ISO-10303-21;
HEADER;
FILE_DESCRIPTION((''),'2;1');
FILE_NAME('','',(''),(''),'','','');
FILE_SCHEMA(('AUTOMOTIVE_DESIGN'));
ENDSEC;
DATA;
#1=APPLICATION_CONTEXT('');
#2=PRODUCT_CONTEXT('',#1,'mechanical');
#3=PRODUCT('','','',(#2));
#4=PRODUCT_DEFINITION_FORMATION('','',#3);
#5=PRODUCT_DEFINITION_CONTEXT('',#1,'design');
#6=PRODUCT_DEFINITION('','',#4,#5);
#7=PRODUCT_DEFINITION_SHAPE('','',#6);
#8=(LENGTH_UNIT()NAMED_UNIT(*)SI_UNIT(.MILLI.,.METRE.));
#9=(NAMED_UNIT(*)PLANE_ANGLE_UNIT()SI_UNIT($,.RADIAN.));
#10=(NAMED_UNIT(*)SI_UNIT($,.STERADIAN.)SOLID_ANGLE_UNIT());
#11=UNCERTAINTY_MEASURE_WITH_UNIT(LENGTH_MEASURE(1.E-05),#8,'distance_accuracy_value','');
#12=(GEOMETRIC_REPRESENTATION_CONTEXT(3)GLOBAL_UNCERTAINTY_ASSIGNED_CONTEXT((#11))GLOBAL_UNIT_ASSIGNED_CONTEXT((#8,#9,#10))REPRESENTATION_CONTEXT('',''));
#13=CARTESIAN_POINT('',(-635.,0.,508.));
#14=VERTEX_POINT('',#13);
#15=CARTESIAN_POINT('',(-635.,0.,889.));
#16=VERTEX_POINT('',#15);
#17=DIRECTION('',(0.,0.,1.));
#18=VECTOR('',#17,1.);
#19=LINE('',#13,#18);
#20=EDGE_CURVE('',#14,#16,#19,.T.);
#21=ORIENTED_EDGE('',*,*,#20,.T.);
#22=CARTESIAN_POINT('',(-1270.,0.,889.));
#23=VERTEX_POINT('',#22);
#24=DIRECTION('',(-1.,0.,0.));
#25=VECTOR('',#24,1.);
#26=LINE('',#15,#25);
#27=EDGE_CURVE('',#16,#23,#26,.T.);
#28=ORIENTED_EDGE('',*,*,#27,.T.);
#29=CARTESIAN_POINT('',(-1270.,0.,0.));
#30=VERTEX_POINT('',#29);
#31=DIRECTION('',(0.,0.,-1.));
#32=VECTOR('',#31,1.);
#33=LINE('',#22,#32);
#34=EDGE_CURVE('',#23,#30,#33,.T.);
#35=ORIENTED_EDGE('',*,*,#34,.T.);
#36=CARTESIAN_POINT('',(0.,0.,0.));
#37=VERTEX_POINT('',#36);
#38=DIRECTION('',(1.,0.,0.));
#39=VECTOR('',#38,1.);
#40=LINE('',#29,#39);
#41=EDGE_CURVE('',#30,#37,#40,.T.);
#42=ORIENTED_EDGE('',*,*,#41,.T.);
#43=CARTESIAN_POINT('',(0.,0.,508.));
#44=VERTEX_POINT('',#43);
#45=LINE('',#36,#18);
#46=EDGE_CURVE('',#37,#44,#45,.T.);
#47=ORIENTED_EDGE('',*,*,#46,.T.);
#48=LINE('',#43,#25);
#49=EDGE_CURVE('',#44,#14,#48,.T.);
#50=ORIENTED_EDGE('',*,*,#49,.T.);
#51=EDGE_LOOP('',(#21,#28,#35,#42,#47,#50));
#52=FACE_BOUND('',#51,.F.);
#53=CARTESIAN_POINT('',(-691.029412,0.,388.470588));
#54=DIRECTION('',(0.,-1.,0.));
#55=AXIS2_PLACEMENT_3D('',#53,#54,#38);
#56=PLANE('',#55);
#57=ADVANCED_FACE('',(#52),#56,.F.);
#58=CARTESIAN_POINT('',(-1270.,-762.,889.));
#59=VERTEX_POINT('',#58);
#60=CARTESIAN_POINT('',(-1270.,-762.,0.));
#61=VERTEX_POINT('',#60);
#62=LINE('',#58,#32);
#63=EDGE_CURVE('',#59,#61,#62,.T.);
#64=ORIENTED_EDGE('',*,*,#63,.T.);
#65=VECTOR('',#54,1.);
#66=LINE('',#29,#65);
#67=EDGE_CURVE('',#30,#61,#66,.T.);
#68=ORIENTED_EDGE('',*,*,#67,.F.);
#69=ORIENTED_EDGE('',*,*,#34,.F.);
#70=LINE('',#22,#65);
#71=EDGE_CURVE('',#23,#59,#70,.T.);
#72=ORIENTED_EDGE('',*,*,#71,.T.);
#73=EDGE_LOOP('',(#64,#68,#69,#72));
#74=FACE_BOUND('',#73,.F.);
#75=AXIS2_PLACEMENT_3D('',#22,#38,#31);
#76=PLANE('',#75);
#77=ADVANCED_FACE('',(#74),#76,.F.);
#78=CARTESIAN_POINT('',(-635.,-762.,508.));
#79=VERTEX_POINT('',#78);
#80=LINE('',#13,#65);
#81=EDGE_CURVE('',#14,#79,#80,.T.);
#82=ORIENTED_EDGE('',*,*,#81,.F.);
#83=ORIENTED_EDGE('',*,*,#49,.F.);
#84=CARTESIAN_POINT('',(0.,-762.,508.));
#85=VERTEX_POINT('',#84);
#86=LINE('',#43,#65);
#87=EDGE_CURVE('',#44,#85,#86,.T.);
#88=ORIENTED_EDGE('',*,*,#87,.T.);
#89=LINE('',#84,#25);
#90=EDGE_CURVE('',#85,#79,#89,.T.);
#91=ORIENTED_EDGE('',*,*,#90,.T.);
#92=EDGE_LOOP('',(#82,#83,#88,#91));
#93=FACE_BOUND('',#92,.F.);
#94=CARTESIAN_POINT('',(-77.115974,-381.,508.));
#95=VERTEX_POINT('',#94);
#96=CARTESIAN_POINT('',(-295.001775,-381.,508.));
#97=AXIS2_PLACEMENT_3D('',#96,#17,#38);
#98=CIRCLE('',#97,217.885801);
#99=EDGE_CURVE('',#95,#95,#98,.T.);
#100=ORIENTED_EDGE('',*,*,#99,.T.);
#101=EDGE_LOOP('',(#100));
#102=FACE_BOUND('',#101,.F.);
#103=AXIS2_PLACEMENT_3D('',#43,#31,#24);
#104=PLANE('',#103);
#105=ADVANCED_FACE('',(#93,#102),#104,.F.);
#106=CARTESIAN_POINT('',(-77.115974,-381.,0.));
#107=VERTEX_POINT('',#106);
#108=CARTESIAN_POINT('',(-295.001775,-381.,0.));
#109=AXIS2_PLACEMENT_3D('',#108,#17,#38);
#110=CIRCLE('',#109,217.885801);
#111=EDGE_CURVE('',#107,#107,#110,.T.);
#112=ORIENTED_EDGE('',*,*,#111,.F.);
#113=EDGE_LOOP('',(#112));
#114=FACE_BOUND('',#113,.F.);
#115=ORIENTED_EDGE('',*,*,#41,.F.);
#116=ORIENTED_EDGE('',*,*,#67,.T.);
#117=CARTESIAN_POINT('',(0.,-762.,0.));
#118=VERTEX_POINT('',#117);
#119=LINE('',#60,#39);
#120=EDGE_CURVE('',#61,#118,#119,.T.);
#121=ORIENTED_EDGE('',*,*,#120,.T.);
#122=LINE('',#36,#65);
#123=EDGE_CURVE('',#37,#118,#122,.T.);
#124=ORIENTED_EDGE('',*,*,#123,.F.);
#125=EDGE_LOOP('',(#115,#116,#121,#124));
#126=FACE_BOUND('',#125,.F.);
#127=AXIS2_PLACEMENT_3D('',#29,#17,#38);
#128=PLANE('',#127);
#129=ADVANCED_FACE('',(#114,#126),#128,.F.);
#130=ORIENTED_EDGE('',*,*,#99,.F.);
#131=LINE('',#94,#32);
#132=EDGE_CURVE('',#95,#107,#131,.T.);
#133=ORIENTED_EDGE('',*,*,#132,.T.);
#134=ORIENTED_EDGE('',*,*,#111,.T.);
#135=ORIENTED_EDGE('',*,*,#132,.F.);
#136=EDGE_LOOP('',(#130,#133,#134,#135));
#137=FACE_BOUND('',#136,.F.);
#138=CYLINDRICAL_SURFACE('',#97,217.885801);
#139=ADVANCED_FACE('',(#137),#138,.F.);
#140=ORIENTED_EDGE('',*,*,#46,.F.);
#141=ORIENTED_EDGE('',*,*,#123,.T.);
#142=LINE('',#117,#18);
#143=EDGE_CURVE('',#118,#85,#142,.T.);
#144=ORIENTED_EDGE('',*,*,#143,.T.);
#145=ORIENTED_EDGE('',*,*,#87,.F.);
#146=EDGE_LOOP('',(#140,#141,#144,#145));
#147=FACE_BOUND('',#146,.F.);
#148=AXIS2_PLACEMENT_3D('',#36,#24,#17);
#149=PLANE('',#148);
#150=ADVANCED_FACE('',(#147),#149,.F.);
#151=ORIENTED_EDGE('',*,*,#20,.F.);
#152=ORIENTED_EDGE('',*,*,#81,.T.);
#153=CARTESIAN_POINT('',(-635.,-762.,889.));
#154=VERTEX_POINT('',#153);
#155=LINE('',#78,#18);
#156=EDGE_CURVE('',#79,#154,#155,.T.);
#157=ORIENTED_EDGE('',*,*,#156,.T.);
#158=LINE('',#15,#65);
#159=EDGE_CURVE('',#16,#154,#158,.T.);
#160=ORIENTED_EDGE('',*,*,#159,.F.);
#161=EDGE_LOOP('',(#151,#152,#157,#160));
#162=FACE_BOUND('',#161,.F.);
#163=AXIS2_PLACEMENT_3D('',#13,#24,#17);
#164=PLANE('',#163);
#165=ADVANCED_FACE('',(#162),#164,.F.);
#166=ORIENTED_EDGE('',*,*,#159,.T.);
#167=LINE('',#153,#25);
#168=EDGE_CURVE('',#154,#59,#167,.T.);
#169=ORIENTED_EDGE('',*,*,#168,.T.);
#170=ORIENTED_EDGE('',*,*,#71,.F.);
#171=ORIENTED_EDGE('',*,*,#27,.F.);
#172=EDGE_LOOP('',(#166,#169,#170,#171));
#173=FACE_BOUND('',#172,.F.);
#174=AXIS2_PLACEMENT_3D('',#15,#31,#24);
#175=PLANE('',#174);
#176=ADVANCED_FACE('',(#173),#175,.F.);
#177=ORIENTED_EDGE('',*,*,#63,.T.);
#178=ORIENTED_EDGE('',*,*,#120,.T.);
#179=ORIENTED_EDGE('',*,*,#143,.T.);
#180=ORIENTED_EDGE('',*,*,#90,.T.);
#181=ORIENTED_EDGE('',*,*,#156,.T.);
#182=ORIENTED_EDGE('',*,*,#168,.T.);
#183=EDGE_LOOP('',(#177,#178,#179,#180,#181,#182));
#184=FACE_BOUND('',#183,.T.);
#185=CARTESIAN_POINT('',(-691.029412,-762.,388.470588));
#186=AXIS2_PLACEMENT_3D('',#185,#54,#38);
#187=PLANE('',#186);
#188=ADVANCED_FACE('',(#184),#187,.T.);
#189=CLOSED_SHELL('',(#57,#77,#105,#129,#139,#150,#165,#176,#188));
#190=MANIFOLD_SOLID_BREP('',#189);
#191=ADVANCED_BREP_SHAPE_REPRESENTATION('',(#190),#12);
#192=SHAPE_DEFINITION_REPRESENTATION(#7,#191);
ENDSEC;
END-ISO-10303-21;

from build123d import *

# Parameters (mm, degrees)
F1_DEPTH = 762
F2_R     = 217.8858008063
F3_DEPTH = 508


# Not quite as in the source:
# - a feature names something its author has since deleted; it is built from what else it names


with BuildPart() as f1:
    # F0 (on Front) → F1 (new body)
    with BuildSketch(Plane.XZ):
        Polygon((-1270, 0), (0, 0), (0, 508), (-635, 508), (-635, 889), (-1270, 889), align=None)
    extrude(amount=F1_DEPTH)

    # F2 (on face) → F3 (cut)
    with BuildSketch(Plane.XY.offset(508)):
        with Locations((-295.0017750263, -381)):
            Circle(F2_R)
    extrude(amount=-F3_DEPTH, mode=Mode.SUBTRACT)


solid = f1.part
